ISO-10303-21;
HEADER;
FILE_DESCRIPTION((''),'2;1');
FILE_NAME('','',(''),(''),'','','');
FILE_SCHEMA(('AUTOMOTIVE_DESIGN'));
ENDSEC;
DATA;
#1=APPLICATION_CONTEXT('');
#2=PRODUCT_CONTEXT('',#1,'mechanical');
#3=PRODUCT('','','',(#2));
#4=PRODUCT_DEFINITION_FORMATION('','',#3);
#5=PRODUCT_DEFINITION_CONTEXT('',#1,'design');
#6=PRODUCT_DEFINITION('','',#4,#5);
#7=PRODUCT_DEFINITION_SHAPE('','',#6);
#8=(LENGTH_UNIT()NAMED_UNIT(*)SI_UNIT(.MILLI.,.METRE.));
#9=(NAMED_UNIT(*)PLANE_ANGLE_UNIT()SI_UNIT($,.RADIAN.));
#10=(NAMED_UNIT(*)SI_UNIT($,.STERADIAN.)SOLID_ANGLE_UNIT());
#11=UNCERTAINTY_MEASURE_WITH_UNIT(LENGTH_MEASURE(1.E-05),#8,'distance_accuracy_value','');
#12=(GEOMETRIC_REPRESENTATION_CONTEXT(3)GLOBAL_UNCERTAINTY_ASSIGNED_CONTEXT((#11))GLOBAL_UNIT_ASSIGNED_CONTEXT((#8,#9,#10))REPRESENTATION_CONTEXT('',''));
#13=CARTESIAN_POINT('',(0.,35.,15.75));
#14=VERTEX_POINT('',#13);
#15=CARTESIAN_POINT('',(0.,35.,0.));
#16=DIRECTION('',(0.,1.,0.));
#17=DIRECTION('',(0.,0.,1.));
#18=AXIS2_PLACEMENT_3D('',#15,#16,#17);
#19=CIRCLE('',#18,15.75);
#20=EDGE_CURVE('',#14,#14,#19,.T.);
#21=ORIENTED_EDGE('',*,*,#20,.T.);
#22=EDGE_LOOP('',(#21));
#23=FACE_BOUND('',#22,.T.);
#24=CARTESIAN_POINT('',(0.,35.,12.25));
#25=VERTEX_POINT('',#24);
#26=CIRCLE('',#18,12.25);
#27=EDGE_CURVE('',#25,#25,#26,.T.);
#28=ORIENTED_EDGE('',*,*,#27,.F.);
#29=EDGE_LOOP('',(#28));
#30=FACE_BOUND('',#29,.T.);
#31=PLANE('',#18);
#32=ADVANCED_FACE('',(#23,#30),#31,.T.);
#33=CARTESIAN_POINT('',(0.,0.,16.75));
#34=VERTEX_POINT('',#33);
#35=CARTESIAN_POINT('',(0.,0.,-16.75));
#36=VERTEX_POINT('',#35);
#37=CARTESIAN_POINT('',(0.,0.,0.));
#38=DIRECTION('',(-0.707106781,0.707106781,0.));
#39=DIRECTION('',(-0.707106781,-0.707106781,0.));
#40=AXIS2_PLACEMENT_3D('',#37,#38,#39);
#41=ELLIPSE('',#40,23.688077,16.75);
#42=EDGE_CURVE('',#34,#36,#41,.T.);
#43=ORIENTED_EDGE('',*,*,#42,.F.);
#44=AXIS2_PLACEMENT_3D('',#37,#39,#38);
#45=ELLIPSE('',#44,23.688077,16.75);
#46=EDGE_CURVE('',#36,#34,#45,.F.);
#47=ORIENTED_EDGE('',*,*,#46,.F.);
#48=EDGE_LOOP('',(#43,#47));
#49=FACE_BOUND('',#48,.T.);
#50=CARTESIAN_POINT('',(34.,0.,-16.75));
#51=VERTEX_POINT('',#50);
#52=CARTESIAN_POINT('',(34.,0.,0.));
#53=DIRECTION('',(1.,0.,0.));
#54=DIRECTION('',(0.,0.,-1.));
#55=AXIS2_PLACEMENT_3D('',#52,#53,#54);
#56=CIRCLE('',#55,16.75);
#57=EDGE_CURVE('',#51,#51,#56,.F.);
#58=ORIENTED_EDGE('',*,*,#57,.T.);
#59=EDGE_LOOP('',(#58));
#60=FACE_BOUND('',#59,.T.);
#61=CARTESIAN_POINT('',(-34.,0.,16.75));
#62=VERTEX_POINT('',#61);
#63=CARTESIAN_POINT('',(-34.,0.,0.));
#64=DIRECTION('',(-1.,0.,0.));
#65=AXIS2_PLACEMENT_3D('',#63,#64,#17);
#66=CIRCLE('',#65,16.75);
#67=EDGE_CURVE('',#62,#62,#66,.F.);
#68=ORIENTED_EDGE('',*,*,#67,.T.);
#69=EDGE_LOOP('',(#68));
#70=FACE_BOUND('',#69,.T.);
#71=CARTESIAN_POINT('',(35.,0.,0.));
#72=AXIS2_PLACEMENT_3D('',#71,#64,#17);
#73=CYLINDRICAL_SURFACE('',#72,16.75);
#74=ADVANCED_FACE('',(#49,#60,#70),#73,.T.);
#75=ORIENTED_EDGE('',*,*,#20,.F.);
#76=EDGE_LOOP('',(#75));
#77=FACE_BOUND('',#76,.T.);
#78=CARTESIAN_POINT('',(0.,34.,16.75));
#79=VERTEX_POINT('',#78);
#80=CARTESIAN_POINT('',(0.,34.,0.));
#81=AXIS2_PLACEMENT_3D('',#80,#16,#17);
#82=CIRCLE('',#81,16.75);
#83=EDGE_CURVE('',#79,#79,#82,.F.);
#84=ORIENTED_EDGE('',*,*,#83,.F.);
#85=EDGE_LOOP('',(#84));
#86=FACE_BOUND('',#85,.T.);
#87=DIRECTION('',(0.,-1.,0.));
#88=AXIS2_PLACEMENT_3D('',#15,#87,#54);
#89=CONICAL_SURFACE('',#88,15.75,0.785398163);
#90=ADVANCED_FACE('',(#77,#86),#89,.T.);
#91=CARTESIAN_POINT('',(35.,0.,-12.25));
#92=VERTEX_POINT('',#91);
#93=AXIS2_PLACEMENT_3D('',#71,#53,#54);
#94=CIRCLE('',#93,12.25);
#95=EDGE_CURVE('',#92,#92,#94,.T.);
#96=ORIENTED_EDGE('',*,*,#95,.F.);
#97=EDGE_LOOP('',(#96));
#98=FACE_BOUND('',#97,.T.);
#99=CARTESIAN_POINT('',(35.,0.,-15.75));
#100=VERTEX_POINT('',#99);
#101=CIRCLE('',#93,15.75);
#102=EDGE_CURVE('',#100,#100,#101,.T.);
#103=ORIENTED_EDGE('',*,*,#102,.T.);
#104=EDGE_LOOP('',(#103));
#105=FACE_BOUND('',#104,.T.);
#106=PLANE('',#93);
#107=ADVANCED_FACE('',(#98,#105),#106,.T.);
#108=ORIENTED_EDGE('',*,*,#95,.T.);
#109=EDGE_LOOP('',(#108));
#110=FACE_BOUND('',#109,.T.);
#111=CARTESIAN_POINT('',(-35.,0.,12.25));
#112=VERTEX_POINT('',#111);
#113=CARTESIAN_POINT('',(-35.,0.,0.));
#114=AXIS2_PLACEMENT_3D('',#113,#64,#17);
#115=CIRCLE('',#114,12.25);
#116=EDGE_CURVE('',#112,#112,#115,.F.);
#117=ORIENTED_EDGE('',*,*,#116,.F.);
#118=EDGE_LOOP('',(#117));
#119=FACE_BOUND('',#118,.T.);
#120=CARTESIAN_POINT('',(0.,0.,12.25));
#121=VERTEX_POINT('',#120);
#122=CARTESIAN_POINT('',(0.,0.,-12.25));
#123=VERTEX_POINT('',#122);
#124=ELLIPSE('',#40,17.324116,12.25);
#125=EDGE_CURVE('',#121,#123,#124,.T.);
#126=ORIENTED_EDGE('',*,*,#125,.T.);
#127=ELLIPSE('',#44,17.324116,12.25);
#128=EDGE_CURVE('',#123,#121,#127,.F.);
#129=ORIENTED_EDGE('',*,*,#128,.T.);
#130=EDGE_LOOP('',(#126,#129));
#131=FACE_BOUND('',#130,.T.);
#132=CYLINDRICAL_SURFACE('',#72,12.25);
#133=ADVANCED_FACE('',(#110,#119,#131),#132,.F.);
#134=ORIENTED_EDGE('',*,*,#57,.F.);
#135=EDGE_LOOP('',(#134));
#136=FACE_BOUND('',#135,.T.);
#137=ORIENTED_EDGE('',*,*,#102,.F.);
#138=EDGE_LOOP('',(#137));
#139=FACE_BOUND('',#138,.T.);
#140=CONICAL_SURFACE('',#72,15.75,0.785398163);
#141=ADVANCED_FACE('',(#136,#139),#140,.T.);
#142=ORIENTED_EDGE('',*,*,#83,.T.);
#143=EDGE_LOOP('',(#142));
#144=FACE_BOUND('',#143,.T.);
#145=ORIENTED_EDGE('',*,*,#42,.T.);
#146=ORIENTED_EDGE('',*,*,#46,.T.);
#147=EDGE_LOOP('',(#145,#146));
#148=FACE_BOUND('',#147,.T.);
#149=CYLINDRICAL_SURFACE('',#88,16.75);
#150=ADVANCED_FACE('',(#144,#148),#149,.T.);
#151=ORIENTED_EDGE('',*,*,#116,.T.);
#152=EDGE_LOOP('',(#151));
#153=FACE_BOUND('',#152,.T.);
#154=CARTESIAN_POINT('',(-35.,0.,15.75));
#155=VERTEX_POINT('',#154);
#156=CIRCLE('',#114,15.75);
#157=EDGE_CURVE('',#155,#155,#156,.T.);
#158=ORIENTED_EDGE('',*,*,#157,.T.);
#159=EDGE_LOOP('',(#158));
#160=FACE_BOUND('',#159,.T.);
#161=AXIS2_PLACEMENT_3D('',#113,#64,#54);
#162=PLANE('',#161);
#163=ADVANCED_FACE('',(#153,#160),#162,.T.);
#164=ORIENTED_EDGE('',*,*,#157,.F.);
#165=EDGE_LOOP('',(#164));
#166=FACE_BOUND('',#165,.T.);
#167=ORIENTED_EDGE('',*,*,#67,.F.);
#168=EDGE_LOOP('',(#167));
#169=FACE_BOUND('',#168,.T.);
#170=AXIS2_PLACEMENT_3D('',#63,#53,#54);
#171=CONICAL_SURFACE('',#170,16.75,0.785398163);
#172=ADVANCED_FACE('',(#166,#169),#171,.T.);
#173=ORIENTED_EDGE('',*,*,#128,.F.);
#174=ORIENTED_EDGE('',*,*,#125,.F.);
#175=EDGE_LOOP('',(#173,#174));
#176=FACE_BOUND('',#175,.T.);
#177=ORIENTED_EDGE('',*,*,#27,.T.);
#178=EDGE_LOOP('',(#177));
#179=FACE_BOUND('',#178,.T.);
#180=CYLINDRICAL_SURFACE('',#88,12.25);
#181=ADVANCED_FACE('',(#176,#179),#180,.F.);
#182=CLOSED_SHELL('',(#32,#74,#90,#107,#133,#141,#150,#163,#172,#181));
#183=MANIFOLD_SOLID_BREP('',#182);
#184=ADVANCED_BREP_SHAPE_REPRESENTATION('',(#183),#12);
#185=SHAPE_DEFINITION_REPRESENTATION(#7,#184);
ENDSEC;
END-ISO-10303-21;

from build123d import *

# Parameters (mm, degrees)
RUNROUTE_R           = 16.75
RUNEXTRUDE_DEPTH     = 35
OUTLETROUTE_R        = 16.75
OUTLETEXTRUDE_DEPTH  = 35
TEESHELL_START       = -35
TEESHELL_OUTLINE_R   = 12.25
TEESHELL_DEPTH       = 70
TEESHELL_START_2     = -1e-07
TEESHELL_2_OUTLINE_R = 12.25
TEESHELL_2_DEPTH     = 35.0000001
TEECHAMFER_SIZE      = 1


with BuildPart() as part:
    # RunRoute → RunExtrude (new body)
    with BuildSketch(Plane(origin=(0, 0, 0), x_dir=(0, 0, -1), z_dir=(1, 0, 0))):
        Circle(RUNROUTE_R)
    runextrude = extrude(amount=RUNEXTRUDE_DEPTH)

    # RunExtrudeMirror: RunExtrude across plane
    add(runextrude.mirror(Plane(origin=(0, 0, 0), x_dir=(0, 0, 1), z_dir=(1, 0, 0))))

    # OutletRoute → OutletExtrude (add)
    with BuildSketch(Plane(origin=(0, 0, 0), x_dir=(1, 0, 0), z_dir=(0, 1, 0))):
        with Locations(Location((0, 0, 0), (0, 0, 270))):
            Circle(OUTLETROUTE_R)
    extrude(amount=OUTLETEXTRUDE_DEPTH)

    # TeeShell: read off the stored shape, not the designer's step
    # TeeShell outline → TeeShell (cut)
    with BuildSketch(Plane.YZ.offset(TEESHELL_START)):
        Circle(TEESHELL_OUTLINE_R)
    extrude(amount=TEESHELL_DEPTH, mode=Mode.SUBTRACT)

    # TeeShell 2 outline → TeeShell 2 (cut)
    with BuildSketch(Plane(origin=(0, 0, 0), x_dir=(1, 0, 0), z_dir=(0, 1, 0)).offset(TEESHELL_START_2)):
        Circle(TEESHELL_2_OUTLINE_R)
    extrude(amount=TEESHELL_2_DEPTH, mode=Mode.SUBTRACT)

    # TeeChamfer
    # the kernel refuses this chamfer: 1 mm, written as the material it takes off along each edge
    with BuildSketch(Plane(origin=(0, 35, 0), x_dir=(0, 0, 1), z_dir=(-1, 0, 0))) as teechamfer_piece_1:
        Polygon((16.75, -TEECHAMFER_SIZE), (16.75 - TEECHAMFER_SIZE, 0), (16.75, 0), align=None)
    revolve(axis=Axis((0, 35, 0), (0, 1, 0)), mode=Mode.SUBTRACT)
    with BuildSketch(Plane(origin=(35, 0, 0), x_dir=(0, 0, -1), z_dir=(0, -1, 0))) as teechamfer_piece_2:
        Polygon((16.75, -TEECHAMFER_SIZE), (16.75 - TEECHAMFER_SIZE, 0), (16.75, 0), align=None)
    revolve(axis=Axis((35, 0, 0), (1, 0, 0)), mode=Mode.SUBTRACT)
    with BuildSketch(Plane(origin=(-35, 0, 0), x_dir=(0, 0, -1), z_dir=(0, -1, 0))) as teechamfer_piece_3:
        Polygon((16.75, TEECHAMFER_SIZE), (16.75 - TEECHAMFER_SIZE, 0), (16.75, 0), align=None)
    revolve(axis=Axis((-35, 0, 0), (1, 0, 0)), mode=Mode.SUBTRACT)


solid = part.part
